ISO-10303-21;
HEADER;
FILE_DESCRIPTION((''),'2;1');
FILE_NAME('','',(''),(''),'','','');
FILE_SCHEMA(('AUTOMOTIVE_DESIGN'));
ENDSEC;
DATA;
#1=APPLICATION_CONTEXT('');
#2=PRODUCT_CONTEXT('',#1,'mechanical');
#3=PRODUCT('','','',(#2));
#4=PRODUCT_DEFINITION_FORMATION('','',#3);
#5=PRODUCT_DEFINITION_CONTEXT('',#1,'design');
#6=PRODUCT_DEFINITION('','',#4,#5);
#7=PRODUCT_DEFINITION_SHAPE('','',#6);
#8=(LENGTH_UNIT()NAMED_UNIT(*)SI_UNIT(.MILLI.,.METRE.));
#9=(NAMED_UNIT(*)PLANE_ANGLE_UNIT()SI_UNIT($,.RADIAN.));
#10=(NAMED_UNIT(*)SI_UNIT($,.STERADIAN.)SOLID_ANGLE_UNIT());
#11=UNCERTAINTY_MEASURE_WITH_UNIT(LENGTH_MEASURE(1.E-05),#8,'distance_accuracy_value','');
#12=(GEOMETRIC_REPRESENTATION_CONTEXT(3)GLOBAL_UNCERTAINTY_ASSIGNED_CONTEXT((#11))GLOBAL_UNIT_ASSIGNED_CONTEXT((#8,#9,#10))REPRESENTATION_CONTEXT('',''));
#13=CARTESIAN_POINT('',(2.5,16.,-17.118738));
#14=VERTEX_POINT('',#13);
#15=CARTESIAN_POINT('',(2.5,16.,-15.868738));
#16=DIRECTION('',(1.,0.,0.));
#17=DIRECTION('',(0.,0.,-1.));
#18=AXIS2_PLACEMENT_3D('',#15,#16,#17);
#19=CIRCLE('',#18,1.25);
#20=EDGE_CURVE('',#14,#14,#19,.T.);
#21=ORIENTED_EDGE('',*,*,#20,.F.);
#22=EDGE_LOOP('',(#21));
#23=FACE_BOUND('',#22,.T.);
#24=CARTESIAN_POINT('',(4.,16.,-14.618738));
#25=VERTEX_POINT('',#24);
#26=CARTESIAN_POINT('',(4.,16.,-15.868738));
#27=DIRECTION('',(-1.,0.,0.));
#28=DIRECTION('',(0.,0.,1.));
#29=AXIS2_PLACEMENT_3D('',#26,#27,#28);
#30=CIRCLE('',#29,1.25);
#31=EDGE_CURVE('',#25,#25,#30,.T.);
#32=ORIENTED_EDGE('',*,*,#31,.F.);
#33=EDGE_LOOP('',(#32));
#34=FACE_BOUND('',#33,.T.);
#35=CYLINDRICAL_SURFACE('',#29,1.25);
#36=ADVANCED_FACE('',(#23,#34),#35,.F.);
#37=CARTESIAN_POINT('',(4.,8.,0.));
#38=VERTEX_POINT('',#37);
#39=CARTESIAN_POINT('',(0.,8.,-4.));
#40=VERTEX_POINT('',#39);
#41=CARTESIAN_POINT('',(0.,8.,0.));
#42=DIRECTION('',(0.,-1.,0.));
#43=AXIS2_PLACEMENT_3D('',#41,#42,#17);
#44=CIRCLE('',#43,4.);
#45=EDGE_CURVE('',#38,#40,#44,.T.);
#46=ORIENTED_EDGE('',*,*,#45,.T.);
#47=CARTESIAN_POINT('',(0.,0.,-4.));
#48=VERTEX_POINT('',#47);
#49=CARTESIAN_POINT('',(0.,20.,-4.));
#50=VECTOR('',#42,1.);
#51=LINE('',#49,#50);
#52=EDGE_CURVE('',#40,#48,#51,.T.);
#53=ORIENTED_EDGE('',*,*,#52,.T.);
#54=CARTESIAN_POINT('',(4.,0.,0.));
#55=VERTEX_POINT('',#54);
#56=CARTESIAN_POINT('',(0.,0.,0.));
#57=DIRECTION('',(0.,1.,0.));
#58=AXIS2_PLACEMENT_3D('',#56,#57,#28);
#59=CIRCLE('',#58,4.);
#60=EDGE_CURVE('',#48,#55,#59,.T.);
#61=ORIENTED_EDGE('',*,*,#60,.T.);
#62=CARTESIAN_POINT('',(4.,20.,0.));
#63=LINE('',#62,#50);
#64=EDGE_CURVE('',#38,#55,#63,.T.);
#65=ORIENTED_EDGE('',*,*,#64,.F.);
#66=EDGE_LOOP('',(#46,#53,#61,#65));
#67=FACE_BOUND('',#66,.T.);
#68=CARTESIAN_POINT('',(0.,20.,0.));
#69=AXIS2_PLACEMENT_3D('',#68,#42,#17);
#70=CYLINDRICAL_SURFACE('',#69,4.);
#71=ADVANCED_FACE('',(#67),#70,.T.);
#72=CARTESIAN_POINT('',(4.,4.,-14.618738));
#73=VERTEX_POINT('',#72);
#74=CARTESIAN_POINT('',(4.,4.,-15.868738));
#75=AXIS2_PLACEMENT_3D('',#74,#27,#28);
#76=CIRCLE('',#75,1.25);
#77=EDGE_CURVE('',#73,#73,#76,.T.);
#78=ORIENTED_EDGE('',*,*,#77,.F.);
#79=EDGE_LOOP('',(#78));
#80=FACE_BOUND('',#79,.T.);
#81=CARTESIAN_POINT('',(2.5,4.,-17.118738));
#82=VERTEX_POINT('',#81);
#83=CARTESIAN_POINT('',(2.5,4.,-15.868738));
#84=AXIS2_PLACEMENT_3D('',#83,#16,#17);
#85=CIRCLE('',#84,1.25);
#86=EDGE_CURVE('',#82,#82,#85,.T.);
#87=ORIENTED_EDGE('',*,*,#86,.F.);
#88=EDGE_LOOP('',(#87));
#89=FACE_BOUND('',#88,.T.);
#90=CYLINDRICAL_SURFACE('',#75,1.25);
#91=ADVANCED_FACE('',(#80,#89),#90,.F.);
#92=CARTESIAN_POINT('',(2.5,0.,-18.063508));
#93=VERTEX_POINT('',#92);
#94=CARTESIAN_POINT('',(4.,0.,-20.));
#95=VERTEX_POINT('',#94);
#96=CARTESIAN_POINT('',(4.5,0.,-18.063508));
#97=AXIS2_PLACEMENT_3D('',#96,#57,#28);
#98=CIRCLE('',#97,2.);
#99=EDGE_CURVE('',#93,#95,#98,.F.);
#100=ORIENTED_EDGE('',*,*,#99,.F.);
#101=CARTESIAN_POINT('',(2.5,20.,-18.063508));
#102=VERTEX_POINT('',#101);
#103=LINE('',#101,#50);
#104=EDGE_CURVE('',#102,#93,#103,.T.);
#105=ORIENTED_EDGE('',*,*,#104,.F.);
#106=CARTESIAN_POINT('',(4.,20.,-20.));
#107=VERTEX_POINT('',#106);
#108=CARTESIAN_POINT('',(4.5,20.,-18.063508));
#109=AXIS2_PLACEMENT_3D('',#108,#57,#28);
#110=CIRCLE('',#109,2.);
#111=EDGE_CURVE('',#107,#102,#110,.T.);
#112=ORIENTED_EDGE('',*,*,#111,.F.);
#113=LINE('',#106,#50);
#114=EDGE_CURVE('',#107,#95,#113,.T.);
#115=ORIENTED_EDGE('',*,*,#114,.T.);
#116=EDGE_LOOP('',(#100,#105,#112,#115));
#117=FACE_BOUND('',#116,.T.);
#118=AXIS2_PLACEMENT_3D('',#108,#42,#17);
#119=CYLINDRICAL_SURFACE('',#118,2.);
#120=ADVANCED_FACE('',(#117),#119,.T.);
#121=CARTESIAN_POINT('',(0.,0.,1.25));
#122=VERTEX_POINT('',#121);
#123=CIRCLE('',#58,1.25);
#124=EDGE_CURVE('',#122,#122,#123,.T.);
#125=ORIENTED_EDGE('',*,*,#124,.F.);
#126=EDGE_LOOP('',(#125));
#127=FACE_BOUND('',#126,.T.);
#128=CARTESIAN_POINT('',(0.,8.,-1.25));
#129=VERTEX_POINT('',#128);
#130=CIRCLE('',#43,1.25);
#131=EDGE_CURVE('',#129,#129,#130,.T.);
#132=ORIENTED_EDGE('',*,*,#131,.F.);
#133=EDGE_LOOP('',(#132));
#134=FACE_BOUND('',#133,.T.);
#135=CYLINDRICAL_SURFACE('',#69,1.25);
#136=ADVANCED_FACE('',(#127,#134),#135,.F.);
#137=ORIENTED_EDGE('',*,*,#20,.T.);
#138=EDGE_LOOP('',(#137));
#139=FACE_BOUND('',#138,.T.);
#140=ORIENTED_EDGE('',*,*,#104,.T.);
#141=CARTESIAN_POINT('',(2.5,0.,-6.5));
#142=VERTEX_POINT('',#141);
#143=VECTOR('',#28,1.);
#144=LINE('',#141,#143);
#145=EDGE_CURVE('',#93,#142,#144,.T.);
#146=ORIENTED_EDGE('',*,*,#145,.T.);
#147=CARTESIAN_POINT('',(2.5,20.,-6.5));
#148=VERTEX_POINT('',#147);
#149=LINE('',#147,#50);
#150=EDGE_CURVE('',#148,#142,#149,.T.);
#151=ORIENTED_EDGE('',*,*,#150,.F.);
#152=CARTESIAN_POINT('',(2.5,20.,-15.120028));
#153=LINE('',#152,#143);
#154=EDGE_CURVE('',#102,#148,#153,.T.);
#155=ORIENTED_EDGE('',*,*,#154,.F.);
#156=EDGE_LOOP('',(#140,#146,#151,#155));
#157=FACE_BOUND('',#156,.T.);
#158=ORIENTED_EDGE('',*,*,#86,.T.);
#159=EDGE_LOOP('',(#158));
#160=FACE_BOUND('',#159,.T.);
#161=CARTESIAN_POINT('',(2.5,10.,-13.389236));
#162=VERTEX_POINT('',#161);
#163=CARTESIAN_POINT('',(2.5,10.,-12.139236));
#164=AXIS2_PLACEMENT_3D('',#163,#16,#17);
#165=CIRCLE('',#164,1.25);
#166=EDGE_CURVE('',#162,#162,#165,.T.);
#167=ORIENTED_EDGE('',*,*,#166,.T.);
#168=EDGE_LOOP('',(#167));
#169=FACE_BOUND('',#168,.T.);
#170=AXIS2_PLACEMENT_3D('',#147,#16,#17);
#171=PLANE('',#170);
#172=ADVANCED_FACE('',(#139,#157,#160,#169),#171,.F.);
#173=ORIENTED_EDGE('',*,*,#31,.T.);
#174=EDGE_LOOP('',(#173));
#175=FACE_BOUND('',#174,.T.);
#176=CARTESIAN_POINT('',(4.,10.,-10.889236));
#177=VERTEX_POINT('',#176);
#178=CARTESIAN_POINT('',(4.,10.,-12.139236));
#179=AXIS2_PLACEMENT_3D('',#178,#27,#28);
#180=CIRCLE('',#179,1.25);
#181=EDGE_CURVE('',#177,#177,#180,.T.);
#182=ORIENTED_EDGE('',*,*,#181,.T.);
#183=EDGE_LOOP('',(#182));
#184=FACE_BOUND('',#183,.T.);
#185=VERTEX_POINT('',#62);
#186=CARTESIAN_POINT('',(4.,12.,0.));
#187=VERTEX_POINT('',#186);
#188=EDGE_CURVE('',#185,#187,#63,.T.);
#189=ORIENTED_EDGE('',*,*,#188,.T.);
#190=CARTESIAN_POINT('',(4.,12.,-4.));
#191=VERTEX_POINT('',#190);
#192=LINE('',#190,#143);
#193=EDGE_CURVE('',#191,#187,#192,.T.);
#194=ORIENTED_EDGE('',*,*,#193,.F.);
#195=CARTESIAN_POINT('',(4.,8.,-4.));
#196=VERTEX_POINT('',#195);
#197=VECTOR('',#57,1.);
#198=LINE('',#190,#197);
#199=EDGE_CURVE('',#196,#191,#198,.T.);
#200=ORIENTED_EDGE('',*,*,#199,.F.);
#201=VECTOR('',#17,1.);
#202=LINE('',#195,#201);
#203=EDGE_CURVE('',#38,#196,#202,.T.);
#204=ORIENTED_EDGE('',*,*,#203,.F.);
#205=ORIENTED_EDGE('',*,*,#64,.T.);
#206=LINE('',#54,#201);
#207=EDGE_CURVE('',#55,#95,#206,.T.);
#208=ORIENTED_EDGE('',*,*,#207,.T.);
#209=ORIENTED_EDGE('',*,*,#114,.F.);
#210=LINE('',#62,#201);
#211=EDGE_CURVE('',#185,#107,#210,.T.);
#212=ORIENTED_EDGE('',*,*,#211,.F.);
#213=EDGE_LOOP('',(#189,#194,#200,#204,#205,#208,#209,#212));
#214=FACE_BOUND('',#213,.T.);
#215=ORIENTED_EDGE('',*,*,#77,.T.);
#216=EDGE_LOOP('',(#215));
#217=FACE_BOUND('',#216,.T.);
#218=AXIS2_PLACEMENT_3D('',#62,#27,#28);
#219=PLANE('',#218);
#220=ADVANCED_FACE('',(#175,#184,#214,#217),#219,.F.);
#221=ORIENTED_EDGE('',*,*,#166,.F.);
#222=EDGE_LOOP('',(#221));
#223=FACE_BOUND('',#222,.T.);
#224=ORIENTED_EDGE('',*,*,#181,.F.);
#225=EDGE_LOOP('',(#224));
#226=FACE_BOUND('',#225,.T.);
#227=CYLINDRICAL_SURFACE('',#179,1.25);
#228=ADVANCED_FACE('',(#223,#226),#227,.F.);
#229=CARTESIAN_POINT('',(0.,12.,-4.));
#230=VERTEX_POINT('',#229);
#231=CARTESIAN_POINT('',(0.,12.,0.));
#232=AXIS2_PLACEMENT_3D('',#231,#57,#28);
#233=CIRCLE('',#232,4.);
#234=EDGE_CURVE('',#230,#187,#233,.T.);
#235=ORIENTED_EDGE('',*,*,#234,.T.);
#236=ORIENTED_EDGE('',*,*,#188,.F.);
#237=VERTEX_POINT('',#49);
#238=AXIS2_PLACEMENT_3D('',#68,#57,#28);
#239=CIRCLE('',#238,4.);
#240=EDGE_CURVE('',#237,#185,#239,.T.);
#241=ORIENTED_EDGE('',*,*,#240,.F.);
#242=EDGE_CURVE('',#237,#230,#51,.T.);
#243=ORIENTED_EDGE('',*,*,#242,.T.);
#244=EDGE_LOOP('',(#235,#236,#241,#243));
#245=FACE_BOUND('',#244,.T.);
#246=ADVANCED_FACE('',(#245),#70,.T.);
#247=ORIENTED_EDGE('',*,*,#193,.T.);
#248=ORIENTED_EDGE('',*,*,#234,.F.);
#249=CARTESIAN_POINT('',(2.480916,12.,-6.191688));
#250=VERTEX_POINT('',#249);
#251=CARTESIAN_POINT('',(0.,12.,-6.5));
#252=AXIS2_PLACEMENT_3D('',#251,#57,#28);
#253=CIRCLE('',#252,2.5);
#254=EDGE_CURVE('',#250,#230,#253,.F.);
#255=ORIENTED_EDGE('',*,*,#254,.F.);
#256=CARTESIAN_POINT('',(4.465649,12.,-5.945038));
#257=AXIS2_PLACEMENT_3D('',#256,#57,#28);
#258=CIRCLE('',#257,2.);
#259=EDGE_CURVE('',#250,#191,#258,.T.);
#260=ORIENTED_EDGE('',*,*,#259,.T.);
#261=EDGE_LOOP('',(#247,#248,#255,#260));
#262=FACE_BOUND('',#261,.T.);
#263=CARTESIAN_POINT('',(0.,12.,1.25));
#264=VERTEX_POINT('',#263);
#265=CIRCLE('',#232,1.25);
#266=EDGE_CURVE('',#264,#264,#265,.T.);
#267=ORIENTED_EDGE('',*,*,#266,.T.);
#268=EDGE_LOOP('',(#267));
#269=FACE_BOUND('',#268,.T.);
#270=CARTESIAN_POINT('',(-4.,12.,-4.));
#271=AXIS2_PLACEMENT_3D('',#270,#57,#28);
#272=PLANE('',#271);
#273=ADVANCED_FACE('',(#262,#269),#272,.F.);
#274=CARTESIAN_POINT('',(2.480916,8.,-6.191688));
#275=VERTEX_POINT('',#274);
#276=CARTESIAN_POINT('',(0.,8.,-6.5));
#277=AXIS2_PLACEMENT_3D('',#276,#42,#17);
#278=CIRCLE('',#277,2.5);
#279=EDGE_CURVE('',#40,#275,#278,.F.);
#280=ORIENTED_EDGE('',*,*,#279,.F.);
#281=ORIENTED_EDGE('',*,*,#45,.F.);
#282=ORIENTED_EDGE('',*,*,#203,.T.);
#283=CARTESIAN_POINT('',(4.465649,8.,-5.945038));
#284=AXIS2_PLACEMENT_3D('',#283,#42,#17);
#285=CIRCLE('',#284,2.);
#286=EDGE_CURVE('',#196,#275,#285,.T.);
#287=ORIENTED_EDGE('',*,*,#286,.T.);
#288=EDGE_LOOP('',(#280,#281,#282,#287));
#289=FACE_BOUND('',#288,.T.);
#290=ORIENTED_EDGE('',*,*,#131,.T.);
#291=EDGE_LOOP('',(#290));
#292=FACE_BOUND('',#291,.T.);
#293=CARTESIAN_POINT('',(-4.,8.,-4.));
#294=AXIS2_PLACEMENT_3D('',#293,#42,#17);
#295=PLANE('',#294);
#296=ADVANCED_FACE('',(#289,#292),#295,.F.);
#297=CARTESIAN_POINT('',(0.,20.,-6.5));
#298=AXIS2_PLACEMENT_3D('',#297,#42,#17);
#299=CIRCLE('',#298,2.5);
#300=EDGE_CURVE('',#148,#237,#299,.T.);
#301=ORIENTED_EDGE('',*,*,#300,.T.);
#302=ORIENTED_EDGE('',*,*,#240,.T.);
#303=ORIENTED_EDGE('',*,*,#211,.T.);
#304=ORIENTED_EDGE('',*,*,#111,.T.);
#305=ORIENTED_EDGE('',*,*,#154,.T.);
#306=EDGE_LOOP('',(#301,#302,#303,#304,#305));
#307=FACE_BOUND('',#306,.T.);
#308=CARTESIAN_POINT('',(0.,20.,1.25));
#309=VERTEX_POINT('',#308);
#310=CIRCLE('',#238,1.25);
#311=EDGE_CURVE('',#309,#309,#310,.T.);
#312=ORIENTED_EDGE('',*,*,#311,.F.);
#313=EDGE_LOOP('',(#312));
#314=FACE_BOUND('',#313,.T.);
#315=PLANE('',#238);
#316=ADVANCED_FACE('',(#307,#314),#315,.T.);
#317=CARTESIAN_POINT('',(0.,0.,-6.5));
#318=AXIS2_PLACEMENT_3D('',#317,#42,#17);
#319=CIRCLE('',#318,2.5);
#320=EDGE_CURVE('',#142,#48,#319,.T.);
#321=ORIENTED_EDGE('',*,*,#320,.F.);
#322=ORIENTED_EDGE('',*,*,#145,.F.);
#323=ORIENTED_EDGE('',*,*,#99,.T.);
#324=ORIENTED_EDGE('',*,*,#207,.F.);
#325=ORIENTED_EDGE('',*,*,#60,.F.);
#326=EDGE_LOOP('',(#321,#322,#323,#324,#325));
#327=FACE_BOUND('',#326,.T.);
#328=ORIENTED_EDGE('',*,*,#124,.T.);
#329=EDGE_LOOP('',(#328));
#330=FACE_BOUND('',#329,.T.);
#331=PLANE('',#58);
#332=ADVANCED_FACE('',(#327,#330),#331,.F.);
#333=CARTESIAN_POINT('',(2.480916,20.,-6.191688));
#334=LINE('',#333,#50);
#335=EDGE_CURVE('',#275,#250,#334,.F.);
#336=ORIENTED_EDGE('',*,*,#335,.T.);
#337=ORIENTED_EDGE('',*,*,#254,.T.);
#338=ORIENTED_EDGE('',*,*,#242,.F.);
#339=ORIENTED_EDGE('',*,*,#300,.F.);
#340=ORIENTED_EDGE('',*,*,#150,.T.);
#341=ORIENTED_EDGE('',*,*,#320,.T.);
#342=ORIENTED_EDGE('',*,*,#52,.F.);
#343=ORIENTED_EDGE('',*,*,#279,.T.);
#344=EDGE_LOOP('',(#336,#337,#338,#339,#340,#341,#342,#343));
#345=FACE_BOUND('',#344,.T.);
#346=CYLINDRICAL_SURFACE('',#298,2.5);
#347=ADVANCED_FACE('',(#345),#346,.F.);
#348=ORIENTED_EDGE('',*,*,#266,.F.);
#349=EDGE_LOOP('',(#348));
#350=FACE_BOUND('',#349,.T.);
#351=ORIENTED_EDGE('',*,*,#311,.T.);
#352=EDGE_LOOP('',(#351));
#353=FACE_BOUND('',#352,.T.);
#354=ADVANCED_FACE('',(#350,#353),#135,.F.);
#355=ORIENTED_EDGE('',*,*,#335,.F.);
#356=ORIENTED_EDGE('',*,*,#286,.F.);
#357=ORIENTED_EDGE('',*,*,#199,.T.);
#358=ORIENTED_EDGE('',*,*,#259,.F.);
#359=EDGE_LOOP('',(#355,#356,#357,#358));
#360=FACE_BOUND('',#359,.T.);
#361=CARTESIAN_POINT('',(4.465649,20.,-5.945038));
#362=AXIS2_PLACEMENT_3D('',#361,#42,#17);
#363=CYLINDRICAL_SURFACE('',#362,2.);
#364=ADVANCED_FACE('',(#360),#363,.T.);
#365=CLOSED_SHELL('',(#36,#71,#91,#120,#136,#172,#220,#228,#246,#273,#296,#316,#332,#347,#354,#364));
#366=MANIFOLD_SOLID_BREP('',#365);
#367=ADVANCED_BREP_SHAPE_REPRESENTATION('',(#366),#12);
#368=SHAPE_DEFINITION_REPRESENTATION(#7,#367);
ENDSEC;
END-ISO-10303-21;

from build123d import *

# Parameters (mm, degrees)
SKETCH1_R               = 1.25
BOSS_EXTRUDE1_DEPTH     = 20
CUT_EXTRUDE1_DEPTH      = 30.021543722
CUT_EXTRUDE1_DEPTH_BACK = 30.021543722
SKETCH2_R               = 1.25
CUT_EXTRUDE2_DEPTH      = 29.565713714
CUT_EXTRUDE2_DEPTH_BACK = 29.565713714
SKETCH3_W               = 8
SKETCH3_H               = 4
FILLET1_R               = 2


with BuildPart() as part:
    # Sketch1 → Boss-Extrude1 (new body)
    with BuildSketch(Plane(origin=(0, 0, 0), x_dir=(1, 0, 0), z_dir=(0, 1, 0))):
        with BuildLine():
            Line((4, 0), (4, 20))
            Line((4, 20), (2.5, 20))
            Line((2.5, 20), (2.5, 15.120027663))
            Line((2.5, 15.120027663), (2.5, 6.5))
            ThreePointArc((2.5, 6.5), (1.767766953, 4.732233047), (0, 4))
            ThreePointArc((0, 4), (-2.828427125, -2.828427125), (4, 0))
        make_face()
        with Locations(Location((0, 0, 0), (0, 0, 270))):
            Circle(SKETCH1_R, mode=Mode.SUBTRACT)
    extrude(amount=BOSS_EXTRUDE1_DEPTH)

    # Sketch2 → Cut-Extrude1 (cut, two sides: drawn at the far end of the back side and taken through both)
    with BuildSketch(Plane.ZY.offset(-2.5).offset(-CUT_EXTRUDE1_DEPTH_BACK)):
        with Locations((-12.139236455, 10)):
            Circle(SKETCH2_R)
        with Locations((-15.86873762, 4)):
            Circle(SKETCH2_R)
        with Locations((-15.86873762, 16)):
            Circle(SKETCH2_R)
    extrude(amount=CUT_EXTRUDE1_DEPTH + CUT_EXTRUDE1_DEPTH_BACK, mode=Mode.SUBTRACT)

    # Sketch3 → Cut-Extrude2 (cut, two sides: drawn at the far end of the back side and taken through both)
    with BuildSketch(Plane(origin=(0, 0, 0), x_dir=(0, 0, -1), z_dir=(1, 0, 0)).offset(-CUT_EXTRUDE2_DEPTH_BACK)):
        with Locations((0, 10)):
            Rectangle(SKETCH3_W, SKETCH3_H)
    extrude(amount=CUT_EXTRUDE2_DEPTH + CUT_EXTRUDE2_DEPTH_BACK, mode=Mode.SUBTRACT)

    # Fillet1
    # the kernel refuses this fillet: 2 mm, written as the material it takes off along each edge
    with BuildSketch(Plane(origin=(2.5, -4.841229183, -20), x_dir=(0, 0, 1), z_dir=(0, 1, 0))) as fillet1_piece_1:
        with BuildLine():
            CenterArc((1.936491673, 2), FILLET1_R, 194.477512186, 75.522487814)
            Line((0, 1.5), (-0.038729833, 1.49))
            ThreePointArc((-0.038729833, 1.49), (-0.04, 0.75), (-0.04, 0))
            Line((-0.04, 0), (0, -0.04))
            Line((0, -0.04), (1.936491673, -0.04))
            Line((1.936491673, -0.04), (1.936491673, 0))
        make_face()
    extrude(amount=29.682458366, mode=Mode.SUBTRACT)
    with BuildSketch(Plane(origin=(0, 8, -4), x_dir=(0.7494414478105039, 0, -0.6620706278817206), z_dir=(0, 1, 0))) as fillet1_piece_2:
        with BuildLine():
            CenterArc((4.634494395, -1.498882896), FILLET1_R, 131.457982482, 83.620629792)
            Line((2.997765791, -2.648282512), (2.965031219, -2.671270504))
            ThreePointArc((2.965031219, -2.671270504), (1.472400071, -1.354118914), (-0.026482825, -0.029977658))
            Line((-0.026482825, -0.029977658), (0.026482825, 0.029977658))
            ThreePointArc((0.026482825, 0.029977658), (1.65517657, -0.58639638), (3.283870314, 0.029977658))
            Line((3.283870314, 0.029977658), (3.310353139, 0))
        make_face()
    extrude(amount=4, mode=Mode.SUBTRACT)


solid = part.part
